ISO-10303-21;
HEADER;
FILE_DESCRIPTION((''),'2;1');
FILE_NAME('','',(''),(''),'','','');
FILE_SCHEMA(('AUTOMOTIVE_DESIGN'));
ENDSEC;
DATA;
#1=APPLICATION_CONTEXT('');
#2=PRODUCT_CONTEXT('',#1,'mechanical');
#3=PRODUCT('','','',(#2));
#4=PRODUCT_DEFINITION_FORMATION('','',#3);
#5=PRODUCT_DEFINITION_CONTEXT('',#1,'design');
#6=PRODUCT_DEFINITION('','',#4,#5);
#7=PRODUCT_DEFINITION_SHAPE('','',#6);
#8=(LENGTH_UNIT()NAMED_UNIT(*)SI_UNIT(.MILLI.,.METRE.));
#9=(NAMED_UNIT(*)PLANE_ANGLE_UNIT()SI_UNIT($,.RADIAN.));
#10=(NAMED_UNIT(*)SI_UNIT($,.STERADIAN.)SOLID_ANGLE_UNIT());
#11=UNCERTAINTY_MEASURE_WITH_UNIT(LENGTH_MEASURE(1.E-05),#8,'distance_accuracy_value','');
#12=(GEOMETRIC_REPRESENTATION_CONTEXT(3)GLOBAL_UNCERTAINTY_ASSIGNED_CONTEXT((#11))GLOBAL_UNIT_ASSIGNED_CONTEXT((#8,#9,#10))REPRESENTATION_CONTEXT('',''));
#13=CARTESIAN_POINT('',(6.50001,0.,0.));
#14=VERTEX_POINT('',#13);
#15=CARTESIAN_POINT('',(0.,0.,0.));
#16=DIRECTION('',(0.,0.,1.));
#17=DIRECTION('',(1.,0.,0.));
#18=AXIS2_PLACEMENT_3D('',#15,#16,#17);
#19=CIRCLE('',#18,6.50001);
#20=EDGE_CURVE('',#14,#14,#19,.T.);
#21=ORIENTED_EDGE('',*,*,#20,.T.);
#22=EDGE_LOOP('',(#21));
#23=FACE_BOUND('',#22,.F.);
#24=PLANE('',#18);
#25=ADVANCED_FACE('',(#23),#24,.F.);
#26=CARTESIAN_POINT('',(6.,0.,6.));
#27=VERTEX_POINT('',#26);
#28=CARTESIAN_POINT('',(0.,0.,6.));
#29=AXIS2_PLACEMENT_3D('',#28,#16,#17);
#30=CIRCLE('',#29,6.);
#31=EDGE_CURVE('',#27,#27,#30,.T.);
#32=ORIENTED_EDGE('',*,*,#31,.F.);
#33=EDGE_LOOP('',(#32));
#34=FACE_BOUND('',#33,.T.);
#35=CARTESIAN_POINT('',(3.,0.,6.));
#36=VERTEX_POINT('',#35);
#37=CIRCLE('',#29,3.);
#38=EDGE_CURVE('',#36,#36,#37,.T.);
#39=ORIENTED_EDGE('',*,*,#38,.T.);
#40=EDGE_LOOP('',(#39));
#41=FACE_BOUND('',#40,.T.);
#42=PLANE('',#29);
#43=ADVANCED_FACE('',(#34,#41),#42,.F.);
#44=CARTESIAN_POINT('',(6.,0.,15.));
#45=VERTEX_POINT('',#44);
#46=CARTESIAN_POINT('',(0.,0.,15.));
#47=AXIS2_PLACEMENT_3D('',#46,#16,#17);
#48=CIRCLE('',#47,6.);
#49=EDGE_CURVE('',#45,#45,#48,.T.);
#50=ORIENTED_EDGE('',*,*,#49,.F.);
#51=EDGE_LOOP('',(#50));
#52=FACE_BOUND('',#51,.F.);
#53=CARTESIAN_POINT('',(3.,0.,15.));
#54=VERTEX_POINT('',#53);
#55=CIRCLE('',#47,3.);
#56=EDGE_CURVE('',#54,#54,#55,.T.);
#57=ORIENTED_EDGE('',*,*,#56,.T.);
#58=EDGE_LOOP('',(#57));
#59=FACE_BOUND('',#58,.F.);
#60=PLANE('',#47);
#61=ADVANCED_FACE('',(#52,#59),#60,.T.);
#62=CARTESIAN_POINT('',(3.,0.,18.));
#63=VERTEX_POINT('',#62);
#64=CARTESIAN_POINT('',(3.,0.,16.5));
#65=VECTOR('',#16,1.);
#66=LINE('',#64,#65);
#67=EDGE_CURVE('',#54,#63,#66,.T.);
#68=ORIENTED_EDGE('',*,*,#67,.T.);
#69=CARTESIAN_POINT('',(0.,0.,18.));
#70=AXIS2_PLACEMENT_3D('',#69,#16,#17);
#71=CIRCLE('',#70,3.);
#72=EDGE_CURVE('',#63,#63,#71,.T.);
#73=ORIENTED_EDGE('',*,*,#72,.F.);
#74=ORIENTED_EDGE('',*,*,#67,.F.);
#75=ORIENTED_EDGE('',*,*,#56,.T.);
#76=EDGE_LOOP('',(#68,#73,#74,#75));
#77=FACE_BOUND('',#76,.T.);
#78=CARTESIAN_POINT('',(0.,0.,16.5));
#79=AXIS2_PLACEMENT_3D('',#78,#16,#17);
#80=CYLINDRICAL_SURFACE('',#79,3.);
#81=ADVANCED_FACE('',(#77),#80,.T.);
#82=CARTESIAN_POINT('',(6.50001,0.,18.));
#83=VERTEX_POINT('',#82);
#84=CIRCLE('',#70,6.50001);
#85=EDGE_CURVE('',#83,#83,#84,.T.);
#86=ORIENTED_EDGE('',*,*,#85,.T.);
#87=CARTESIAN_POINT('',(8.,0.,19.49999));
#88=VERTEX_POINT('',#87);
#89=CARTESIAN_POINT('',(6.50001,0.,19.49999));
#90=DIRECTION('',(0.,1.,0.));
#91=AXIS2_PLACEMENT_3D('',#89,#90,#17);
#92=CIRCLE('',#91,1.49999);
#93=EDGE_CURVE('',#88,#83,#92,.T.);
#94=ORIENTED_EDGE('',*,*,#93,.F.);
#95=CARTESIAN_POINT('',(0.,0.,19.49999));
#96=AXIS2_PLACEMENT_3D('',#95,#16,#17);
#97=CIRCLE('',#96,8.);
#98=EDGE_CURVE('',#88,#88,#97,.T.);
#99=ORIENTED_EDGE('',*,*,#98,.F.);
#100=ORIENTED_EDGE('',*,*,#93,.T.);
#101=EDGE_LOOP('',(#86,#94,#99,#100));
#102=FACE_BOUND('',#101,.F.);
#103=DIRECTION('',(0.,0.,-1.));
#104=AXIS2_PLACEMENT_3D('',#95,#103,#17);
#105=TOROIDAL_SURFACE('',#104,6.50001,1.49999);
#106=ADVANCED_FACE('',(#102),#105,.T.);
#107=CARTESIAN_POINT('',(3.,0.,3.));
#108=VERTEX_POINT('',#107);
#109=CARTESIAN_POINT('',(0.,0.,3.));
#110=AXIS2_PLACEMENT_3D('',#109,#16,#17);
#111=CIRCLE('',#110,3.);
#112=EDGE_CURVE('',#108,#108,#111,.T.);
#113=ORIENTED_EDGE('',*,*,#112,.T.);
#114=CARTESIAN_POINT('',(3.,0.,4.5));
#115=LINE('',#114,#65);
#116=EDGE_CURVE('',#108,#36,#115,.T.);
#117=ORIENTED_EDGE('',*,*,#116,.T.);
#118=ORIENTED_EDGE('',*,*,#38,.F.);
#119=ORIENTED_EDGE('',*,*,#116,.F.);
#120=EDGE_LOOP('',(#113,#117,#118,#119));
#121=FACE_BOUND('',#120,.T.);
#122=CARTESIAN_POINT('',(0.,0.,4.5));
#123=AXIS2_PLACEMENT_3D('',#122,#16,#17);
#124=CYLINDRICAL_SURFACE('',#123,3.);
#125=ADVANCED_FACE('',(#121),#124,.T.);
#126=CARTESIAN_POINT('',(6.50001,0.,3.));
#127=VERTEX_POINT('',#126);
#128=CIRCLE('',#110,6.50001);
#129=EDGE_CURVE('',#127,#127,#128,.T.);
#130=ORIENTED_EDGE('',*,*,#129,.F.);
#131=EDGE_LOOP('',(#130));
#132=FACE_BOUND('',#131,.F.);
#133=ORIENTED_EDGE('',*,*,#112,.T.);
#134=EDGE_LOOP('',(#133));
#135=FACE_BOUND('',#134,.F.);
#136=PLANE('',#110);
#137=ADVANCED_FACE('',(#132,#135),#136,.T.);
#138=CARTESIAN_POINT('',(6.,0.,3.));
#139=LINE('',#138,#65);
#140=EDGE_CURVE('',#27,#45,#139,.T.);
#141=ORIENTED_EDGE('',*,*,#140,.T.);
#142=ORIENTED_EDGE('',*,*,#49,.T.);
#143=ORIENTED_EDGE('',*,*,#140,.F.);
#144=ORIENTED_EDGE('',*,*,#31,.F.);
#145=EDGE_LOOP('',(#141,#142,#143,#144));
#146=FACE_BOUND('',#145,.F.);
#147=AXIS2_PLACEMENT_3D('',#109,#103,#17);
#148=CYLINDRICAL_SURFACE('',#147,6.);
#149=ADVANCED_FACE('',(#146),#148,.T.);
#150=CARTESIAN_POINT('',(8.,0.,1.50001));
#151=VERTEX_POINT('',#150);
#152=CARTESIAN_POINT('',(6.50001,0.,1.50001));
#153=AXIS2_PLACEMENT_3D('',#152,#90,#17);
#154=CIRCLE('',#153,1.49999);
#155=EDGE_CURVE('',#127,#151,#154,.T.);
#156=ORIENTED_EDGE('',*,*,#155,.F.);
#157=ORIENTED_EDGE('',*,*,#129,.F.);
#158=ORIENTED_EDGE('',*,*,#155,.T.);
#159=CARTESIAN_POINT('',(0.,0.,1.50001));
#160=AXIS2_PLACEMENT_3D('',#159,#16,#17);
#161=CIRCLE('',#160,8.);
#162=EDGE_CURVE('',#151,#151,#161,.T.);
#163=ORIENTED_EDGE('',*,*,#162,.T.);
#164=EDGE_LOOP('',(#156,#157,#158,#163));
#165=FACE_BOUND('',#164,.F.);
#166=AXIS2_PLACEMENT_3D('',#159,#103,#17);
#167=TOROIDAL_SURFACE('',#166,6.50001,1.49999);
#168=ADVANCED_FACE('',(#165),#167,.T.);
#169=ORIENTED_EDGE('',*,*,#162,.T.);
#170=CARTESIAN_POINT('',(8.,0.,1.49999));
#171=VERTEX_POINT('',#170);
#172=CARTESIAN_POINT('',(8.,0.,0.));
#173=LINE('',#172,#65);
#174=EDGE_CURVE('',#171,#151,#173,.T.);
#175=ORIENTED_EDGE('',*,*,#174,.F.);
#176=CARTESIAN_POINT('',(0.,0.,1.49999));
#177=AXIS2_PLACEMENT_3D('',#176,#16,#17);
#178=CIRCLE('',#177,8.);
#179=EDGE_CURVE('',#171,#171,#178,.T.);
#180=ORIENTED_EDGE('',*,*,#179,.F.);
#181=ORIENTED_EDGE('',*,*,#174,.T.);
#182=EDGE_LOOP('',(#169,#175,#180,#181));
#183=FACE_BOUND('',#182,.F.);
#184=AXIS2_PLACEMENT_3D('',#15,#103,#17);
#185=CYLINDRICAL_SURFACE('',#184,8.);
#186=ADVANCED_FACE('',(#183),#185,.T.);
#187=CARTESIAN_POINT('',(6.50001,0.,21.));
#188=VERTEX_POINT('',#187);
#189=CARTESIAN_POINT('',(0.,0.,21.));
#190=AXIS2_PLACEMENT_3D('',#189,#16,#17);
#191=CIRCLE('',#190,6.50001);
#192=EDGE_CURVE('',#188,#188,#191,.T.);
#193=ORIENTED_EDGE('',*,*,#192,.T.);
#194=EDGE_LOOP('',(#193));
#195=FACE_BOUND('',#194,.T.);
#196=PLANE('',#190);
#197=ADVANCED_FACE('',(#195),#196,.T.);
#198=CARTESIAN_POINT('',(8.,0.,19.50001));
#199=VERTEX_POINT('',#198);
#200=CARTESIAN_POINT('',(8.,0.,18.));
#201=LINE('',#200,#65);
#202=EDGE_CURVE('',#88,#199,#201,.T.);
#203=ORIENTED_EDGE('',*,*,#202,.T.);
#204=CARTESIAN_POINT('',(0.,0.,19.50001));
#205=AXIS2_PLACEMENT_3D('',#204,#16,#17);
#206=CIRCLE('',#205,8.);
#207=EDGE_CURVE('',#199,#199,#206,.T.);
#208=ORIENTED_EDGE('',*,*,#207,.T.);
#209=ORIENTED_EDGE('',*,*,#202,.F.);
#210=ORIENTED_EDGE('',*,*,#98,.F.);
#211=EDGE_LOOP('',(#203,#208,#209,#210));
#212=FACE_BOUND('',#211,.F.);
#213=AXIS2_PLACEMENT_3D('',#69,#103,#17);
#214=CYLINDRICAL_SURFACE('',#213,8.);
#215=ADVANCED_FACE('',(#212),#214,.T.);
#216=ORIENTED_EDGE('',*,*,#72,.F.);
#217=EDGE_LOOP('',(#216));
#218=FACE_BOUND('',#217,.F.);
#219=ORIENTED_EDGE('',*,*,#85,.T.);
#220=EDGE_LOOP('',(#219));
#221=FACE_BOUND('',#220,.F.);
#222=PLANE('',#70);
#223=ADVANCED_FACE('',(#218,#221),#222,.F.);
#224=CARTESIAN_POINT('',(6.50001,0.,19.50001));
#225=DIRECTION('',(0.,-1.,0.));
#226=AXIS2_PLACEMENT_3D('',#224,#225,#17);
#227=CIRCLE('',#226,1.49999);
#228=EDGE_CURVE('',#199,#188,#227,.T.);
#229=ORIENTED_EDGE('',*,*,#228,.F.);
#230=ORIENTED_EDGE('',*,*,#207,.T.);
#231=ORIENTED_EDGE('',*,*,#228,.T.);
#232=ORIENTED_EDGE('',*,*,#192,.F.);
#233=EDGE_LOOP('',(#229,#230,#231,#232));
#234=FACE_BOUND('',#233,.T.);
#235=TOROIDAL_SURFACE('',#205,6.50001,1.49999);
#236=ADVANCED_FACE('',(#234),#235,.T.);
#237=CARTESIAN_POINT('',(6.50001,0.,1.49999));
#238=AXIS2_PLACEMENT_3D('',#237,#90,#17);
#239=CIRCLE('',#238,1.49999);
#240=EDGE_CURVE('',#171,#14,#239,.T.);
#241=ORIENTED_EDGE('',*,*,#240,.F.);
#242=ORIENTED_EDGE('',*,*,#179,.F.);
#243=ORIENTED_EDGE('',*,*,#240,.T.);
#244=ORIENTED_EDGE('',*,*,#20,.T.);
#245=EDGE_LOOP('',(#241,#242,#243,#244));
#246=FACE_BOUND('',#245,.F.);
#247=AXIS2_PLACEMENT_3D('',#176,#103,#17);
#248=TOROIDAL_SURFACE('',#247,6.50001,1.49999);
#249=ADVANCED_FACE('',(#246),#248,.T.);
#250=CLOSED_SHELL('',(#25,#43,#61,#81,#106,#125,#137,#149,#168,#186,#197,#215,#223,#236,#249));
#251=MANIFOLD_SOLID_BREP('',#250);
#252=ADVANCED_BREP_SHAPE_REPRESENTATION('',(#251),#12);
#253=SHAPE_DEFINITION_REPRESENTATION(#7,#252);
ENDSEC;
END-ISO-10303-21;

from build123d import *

# Parameters (mm, degrees)
F0_R     = 8
F1_DEPTH = 3
F2_R     = 6
F3_DEPTH = 15
F4_R     = 8
F4_R_2   = 6
F5_DEPTH = 3
F6_R     = 1.49999
F7_W     = 3
F7_H     = 3


# Not quite as in the source:
# - a fillet or chamfer is up to 0.001 mm smaller than in the source, because OpenCascade refuses the exact size


with BuildPart() as f1:
    # F0 (on Top) → F1 (new body)
    with BuildSketch(Plane.XY):
        Circle(F0_R)
    extrude(amount=F1_DEPTH)

    # F2 (on face) → F3 (join)
    with BuildSketch(Plane.XY.offset(3)):
        Circle(F2_R)
    extrude(amount=F3_DEPTH)

    # F4 (on face) → F5 (join)
    with BuildSketch(Plane.XY.offset(18)):
        Circle(F4_R)
        Circle(F4_R_2, mode=Mode.SUBTRACT)
        Circle(F4_R_2)
    extrude(amount=F5_DEPTH)

    # F6 (radius 1.5 in the source; OpenCascade refuses exactly that, so slightly less here)
    f6_edges = [f1.edges().sort_by_distance(p)[0] for p in [
        (-8, 0, 21),
        (-8, 0, 18),
        (-8, 0, 3),
        (-8, 0, 0),
    ]]
    fillet(f6_edges, radius=F6_R)

    # F7 (on Front) → F8 (revolve, cut)
    with BuildSketch(Plane.XZ):
        with Locations((4.5, 4.5)):
            Rectangle(F7_W, F7_H)
        with Locations((4.5, 16.5)):
            Rectangle(F7_W, F7_H)
    revolve(axis=Axis((0, 0, 11.7473863065), (0, 0, 1)), mode=Mode.SUBTRACT)


solid = f1.part
